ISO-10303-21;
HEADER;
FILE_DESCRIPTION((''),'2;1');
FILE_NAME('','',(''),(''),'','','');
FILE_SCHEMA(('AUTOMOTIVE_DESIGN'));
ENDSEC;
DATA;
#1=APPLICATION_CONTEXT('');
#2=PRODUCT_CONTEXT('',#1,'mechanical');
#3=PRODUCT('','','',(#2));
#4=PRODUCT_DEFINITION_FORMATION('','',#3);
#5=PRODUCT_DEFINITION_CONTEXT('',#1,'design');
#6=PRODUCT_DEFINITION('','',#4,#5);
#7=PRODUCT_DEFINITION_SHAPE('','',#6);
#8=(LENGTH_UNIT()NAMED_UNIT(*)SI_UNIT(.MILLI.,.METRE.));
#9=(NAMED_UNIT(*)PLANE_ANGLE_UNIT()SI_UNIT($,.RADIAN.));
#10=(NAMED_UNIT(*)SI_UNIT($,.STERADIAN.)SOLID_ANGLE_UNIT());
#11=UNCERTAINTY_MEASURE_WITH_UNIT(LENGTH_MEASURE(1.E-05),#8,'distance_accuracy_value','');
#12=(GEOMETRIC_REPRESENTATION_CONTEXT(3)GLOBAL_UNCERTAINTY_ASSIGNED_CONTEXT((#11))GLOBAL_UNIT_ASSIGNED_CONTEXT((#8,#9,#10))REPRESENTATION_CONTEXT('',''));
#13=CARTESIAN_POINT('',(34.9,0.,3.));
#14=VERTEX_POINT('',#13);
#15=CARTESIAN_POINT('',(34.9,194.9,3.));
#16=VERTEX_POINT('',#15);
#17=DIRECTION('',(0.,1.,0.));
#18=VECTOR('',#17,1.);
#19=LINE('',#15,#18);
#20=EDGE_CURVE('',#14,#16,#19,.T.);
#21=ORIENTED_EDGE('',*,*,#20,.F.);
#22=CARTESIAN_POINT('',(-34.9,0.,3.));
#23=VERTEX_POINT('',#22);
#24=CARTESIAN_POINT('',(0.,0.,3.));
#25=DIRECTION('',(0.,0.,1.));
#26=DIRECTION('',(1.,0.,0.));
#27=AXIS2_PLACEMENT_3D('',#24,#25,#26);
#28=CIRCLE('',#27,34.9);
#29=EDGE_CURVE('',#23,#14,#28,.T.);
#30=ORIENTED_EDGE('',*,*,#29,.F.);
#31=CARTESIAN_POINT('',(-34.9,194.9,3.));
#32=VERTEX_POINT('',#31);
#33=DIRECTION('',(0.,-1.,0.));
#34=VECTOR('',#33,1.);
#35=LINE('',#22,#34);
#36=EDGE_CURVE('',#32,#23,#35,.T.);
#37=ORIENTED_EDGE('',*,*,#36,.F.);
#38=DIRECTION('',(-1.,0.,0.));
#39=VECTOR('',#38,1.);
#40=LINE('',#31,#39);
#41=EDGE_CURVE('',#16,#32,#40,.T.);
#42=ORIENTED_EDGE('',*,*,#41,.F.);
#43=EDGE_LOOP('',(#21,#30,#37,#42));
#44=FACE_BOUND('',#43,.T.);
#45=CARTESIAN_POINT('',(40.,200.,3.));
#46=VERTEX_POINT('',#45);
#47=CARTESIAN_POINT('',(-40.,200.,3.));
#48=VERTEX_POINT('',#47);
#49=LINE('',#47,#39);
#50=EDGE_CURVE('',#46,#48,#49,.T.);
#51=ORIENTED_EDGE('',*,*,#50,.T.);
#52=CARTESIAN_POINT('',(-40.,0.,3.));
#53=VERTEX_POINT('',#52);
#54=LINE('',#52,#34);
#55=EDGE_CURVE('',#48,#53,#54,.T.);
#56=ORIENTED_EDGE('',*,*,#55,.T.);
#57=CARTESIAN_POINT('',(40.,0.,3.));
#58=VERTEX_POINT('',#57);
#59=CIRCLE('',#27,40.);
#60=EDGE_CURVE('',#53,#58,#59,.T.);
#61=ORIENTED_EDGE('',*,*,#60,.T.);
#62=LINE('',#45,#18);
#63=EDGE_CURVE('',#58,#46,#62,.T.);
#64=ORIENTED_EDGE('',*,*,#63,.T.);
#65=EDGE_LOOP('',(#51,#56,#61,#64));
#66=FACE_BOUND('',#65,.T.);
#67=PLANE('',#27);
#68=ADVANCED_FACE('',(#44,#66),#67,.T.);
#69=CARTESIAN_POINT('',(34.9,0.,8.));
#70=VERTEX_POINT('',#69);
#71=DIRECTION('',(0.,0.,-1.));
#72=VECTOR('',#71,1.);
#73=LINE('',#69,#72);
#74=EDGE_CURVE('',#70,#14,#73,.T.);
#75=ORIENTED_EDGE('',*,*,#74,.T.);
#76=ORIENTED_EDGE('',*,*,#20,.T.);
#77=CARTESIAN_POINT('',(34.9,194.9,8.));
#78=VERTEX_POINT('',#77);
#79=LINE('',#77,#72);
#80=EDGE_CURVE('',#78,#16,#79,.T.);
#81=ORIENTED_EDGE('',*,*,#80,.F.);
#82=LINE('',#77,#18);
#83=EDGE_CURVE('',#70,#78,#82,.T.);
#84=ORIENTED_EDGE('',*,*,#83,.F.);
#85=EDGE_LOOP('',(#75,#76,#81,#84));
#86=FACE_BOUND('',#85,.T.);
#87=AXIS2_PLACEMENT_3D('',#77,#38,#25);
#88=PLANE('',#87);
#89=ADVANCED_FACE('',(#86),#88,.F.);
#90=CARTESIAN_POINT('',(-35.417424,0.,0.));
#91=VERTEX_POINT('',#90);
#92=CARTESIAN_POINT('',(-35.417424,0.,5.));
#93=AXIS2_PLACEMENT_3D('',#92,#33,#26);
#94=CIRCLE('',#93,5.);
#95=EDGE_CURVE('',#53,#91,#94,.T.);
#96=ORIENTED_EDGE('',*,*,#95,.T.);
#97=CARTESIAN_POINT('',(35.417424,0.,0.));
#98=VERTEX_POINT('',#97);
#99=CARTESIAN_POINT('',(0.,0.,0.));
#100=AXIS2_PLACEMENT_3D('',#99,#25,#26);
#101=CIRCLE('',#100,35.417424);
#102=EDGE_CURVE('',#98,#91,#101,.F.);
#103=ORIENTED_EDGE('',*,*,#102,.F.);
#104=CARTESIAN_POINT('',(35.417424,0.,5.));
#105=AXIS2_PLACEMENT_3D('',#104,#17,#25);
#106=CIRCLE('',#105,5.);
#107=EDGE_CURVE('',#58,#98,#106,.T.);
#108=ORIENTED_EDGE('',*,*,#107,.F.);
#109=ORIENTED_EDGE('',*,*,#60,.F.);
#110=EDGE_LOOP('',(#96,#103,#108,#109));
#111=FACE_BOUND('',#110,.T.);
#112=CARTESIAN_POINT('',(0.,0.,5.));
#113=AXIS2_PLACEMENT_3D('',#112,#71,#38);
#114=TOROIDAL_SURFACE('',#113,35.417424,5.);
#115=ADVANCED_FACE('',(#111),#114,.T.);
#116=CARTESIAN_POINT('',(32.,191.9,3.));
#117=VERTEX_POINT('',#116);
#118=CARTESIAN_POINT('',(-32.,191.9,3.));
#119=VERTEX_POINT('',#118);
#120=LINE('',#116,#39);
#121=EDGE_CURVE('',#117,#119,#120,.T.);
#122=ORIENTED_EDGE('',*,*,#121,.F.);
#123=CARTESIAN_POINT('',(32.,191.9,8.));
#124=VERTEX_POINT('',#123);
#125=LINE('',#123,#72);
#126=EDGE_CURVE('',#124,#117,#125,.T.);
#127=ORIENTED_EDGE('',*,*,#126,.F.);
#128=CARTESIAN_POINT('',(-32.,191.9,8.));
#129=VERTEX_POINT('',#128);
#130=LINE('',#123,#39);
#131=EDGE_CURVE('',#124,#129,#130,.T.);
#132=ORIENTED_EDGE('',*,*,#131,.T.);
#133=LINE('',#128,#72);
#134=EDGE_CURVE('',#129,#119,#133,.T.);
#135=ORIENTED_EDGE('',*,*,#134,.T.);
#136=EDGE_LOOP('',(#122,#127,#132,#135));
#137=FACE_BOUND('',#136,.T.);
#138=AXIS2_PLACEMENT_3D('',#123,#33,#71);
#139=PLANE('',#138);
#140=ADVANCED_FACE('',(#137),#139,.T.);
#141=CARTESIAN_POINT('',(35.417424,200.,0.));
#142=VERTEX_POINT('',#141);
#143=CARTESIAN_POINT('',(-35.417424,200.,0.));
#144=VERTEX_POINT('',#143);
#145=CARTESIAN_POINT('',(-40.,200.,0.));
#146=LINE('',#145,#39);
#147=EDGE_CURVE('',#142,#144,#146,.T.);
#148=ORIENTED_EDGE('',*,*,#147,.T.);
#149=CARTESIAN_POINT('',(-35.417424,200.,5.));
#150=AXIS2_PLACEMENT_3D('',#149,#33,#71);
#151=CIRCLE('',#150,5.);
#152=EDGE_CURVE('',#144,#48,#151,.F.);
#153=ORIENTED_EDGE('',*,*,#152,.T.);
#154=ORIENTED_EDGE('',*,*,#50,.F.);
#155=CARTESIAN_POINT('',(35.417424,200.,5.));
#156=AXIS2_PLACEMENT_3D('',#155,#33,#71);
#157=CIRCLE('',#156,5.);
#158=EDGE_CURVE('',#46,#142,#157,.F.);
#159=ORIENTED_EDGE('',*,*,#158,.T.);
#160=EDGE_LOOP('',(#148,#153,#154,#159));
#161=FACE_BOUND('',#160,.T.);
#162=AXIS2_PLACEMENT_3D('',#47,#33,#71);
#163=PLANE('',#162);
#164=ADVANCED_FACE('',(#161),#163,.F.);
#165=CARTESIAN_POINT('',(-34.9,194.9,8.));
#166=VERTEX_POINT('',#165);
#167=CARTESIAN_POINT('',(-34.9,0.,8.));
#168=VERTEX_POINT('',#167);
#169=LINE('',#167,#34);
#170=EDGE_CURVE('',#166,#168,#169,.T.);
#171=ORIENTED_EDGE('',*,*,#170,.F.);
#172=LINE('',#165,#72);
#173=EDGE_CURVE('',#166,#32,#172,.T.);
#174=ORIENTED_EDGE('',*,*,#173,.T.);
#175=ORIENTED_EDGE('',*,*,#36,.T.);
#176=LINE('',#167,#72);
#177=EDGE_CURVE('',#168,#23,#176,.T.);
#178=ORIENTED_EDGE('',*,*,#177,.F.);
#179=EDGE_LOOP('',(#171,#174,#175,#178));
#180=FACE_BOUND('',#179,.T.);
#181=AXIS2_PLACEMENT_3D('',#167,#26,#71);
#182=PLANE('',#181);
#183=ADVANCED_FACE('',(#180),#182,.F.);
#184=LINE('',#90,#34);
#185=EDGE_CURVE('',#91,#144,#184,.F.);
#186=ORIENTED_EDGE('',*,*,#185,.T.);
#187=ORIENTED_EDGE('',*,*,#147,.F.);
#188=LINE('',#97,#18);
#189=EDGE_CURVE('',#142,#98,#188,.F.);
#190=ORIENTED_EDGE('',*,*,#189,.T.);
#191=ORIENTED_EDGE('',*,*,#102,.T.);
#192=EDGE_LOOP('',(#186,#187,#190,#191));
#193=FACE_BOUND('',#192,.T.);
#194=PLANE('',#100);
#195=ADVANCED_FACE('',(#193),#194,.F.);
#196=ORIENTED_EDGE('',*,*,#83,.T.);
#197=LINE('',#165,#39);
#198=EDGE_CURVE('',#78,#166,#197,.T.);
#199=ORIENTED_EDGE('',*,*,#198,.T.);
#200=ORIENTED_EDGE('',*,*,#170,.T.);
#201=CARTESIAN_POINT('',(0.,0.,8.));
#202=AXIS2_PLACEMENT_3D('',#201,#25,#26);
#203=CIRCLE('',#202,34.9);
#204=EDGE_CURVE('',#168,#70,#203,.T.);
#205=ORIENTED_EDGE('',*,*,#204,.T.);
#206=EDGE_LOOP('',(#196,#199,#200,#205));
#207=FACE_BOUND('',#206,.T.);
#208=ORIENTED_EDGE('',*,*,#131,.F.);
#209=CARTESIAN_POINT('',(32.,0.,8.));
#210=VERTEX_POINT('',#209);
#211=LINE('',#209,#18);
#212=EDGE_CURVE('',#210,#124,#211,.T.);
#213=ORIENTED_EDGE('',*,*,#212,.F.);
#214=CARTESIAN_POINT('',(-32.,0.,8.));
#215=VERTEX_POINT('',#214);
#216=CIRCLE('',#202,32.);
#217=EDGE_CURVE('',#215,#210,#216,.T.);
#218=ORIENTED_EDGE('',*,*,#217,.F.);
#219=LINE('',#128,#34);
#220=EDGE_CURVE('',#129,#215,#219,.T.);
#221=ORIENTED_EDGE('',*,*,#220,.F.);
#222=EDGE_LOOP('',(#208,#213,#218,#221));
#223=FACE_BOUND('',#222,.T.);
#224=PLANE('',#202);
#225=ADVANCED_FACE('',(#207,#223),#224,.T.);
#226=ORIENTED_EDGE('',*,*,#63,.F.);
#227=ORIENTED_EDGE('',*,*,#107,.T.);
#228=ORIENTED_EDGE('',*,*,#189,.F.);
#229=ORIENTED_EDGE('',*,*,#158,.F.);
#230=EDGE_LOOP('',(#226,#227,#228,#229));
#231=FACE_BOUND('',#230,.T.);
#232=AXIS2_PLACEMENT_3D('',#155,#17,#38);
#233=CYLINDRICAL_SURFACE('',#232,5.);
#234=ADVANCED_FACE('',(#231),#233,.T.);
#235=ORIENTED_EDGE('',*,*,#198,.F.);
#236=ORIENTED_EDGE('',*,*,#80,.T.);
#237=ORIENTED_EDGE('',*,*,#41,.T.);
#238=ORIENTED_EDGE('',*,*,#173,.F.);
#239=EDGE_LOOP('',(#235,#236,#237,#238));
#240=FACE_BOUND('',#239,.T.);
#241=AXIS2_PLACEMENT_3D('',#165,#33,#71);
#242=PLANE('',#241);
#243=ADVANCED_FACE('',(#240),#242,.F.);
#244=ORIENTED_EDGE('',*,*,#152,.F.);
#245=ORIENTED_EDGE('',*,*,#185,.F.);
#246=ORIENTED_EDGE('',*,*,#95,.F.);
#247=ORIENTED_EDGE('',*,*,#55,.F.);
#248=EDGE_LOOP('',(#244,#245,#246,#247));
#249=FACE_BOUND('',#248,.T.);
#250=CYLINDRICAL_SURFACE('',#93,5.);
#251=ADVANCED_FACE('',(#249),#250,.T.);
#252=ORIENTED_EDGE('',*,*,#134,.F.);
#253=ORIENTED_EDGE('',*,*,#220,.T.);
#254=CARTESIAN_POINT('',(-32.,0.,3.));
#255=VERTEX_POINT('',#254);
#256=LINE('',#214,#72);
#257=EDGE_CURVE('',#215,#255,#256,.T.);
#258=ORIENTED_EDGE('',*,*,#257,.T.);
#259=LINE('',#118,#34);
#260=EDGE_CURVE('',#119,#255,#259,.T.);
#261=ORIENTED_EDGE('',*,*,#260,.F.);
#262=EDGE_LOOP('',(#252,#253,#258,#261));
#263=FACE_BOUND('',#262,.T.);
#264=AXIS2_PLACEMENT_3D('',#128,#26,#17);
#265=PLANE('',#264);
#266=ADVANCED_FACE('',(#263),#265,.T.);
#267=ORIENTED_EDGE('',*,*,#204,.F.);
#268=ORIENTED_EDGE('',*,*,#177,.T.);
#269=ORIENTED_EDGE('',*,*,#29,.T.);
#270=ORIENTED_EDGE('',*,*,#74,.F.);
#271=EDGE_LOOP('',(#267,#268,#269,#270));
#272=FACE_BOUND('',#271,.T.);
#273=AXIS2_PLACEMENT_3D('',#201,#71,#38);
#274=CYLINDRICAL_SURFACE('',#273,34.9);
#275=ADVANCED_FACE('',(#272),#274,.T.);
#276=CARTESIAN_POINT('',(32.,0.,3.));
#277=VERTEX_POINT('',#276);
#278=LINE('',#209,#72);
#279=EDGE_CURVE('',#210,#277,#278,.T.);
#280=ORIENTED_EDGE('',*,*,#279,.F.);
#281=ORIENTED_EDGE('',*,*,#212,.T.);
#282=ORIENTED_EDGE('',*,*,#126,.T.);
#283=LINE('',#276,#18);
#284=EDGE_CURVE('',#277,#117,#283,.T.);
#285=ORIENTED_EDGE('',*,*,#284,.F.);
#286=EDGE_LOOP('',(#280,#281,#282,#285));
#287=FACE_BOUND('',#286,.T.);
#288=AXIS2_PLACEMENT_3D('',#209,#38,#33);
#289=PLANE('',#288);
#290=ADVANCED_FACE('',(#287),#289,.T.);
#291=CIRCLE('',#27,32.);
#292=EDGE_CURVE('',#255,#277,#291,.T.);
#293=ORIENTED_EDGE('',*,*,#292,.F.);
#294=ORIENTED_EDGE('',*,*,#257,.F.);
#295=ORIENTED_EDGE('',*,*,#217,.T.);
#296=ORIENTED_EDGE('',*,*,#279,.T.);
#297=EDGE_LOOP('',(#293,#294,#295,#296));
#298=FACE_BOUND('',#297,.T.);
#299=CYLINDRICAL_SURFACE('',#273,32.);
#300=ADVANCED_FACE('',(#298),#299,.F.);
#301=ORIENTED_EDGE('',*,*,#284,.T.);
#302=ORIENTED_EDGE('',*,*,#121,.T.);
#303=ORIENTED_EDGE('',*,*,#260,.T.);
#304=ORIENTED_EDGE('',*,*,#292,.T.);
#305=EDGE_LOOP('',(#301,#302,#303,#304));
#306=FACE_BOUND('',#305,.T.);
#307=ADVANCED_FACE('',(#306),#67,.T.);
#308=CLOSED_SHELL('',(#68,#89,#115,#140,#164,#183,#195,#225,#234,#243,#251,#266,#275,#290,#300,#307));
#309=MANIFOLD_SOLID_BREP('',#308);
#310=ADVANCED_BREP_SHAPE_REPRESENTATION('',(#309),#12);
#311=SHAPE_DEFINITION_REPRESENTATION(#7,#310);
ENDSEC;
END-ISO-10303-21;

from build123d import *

# Parameters (mm, degrees)
RESSALTO_EXTRUS_O1_DEPTH = 3
RESSALTO_EXTRUS_O2_DEPTH = 5
FILETE1_R                = 5


with BuildPart() as part:
    # Esboço1 → Ressalto-extrusão1 (new body)
    with BuildSketch(Plane.XY):
        with BuildLine():
            Line((-40, 0), (-40, 200))
            Line((-40, 200), (40, 200))
            Line((40, 200), (40, 0))
            ThreePointArc((40, 0), (0, -40), (-40, 0))
        make_face()
    extrude(amount=RESSALTO_EXTRUS_O1_DEPTH)

    # Esboço2 → Ressalto-extrusão2 (add)
    with BuildSketch(Plane.XY.offset(3)):
        with BuildLine():
            Line((-34.9, 0), (-34.9, 194.9))
            Line((-34.9, 194.9), (34.9, 194.9))
            Line((34.9, 194.9), (34.9, 0))
            ThreePointArc((34.9, 0), (0, -34.9), (-34.9, 0))
        make_face()
        with BuildLine():
            Line((32, 0), (32, 191.9))
            Line((32, 191.9), (-32, 191.9))
            Line((-32, 191.9), (-32, 0))
            ThreePointArc((-32, 0), (0, -32), (32, 0))
        make_face(mode=Mode.SUBTRACT)
    extrude(amount=RESSALTO_EXTRUS_O2_DEPTH)

    # Filete1
    # the kernel refuses this fillet: 5 mm, written as the material it takes off along each edge
    with BuildSketch(Plane(origin=(40, 211.456439237, 0), x_dir=(-1, 0, 0), z_dir=(0, -1, 0))) as filete1_piece_1:
        with BuildLine():
            CenterArc((4.582575695, -5), FILETE1_R, 90, 66.421821522)
            Line((0, -3), (-0.091651514, -2.96))
            ThreePointArc((-0.091651514, -2.96), (-0.1, -1.5), (-0.1, 0))
            Line((-0.1, 0), (0, 0.1))
            Line((0, 0.1), (4.582575695, 0.1))
            Line((4.582575695, 0.1), (4.582575695, 0))
        make_face()
    extrude(amount=211.456439237, mode=Mode.SUBTRACT)
    with BuildSketch(Plane(origin=(0, 0, 0), x_dir=(1, 0, 0), z_dir=(0, 1, 0))) as filete1_piece_2:
        with BuildLine():
            CenterArc((35.417424305, -5), FILETE1_R, 23.578178478, 66.421821522)
            Line((35.417424305, 0), (35.417424305, 0.1))
            Line((35.417424305, 0.1), (40, 0.1))
            Line((40, 0.1), (40.1, 0))
            ThreePointArc((40.1, 0), (40.1, -1.5), (40.091651514, -2.96))
            Line((40.091651514, -2.96), (40, -3))
        make_face()
    revolve(axis=Axis((0, 0, 0), (0, 0, -1)), revolution_arc=180, mode=Mode.SUBTRACT)
    with BuildSketch(Plane(origin=(-40, 0, 0), x_dir=(0, 0, 1), z_dir=(0, 1, 0))) as filete1_piece_3:
        with BuildLine():
            CenterArc((5, 4.582575695), FILETE1_R, 180, 66.421821522)
            Line((0, 4.582575695), (-0.1, 4.582575695))
            Line((-0.1, 4.582575695), (-0.1, 0))
            Line((-0.1, 0), (0, -0.1))
            ThreePointArc((0, -0.1), (1.5, -0.1), (2.96, -0.091651514))
            Line((2.96, -0.091651514), (3, 0))
        make_face()
    extrude(amount=211.456439237, mode=Mode.SUBTRACT)


solid = part.part
